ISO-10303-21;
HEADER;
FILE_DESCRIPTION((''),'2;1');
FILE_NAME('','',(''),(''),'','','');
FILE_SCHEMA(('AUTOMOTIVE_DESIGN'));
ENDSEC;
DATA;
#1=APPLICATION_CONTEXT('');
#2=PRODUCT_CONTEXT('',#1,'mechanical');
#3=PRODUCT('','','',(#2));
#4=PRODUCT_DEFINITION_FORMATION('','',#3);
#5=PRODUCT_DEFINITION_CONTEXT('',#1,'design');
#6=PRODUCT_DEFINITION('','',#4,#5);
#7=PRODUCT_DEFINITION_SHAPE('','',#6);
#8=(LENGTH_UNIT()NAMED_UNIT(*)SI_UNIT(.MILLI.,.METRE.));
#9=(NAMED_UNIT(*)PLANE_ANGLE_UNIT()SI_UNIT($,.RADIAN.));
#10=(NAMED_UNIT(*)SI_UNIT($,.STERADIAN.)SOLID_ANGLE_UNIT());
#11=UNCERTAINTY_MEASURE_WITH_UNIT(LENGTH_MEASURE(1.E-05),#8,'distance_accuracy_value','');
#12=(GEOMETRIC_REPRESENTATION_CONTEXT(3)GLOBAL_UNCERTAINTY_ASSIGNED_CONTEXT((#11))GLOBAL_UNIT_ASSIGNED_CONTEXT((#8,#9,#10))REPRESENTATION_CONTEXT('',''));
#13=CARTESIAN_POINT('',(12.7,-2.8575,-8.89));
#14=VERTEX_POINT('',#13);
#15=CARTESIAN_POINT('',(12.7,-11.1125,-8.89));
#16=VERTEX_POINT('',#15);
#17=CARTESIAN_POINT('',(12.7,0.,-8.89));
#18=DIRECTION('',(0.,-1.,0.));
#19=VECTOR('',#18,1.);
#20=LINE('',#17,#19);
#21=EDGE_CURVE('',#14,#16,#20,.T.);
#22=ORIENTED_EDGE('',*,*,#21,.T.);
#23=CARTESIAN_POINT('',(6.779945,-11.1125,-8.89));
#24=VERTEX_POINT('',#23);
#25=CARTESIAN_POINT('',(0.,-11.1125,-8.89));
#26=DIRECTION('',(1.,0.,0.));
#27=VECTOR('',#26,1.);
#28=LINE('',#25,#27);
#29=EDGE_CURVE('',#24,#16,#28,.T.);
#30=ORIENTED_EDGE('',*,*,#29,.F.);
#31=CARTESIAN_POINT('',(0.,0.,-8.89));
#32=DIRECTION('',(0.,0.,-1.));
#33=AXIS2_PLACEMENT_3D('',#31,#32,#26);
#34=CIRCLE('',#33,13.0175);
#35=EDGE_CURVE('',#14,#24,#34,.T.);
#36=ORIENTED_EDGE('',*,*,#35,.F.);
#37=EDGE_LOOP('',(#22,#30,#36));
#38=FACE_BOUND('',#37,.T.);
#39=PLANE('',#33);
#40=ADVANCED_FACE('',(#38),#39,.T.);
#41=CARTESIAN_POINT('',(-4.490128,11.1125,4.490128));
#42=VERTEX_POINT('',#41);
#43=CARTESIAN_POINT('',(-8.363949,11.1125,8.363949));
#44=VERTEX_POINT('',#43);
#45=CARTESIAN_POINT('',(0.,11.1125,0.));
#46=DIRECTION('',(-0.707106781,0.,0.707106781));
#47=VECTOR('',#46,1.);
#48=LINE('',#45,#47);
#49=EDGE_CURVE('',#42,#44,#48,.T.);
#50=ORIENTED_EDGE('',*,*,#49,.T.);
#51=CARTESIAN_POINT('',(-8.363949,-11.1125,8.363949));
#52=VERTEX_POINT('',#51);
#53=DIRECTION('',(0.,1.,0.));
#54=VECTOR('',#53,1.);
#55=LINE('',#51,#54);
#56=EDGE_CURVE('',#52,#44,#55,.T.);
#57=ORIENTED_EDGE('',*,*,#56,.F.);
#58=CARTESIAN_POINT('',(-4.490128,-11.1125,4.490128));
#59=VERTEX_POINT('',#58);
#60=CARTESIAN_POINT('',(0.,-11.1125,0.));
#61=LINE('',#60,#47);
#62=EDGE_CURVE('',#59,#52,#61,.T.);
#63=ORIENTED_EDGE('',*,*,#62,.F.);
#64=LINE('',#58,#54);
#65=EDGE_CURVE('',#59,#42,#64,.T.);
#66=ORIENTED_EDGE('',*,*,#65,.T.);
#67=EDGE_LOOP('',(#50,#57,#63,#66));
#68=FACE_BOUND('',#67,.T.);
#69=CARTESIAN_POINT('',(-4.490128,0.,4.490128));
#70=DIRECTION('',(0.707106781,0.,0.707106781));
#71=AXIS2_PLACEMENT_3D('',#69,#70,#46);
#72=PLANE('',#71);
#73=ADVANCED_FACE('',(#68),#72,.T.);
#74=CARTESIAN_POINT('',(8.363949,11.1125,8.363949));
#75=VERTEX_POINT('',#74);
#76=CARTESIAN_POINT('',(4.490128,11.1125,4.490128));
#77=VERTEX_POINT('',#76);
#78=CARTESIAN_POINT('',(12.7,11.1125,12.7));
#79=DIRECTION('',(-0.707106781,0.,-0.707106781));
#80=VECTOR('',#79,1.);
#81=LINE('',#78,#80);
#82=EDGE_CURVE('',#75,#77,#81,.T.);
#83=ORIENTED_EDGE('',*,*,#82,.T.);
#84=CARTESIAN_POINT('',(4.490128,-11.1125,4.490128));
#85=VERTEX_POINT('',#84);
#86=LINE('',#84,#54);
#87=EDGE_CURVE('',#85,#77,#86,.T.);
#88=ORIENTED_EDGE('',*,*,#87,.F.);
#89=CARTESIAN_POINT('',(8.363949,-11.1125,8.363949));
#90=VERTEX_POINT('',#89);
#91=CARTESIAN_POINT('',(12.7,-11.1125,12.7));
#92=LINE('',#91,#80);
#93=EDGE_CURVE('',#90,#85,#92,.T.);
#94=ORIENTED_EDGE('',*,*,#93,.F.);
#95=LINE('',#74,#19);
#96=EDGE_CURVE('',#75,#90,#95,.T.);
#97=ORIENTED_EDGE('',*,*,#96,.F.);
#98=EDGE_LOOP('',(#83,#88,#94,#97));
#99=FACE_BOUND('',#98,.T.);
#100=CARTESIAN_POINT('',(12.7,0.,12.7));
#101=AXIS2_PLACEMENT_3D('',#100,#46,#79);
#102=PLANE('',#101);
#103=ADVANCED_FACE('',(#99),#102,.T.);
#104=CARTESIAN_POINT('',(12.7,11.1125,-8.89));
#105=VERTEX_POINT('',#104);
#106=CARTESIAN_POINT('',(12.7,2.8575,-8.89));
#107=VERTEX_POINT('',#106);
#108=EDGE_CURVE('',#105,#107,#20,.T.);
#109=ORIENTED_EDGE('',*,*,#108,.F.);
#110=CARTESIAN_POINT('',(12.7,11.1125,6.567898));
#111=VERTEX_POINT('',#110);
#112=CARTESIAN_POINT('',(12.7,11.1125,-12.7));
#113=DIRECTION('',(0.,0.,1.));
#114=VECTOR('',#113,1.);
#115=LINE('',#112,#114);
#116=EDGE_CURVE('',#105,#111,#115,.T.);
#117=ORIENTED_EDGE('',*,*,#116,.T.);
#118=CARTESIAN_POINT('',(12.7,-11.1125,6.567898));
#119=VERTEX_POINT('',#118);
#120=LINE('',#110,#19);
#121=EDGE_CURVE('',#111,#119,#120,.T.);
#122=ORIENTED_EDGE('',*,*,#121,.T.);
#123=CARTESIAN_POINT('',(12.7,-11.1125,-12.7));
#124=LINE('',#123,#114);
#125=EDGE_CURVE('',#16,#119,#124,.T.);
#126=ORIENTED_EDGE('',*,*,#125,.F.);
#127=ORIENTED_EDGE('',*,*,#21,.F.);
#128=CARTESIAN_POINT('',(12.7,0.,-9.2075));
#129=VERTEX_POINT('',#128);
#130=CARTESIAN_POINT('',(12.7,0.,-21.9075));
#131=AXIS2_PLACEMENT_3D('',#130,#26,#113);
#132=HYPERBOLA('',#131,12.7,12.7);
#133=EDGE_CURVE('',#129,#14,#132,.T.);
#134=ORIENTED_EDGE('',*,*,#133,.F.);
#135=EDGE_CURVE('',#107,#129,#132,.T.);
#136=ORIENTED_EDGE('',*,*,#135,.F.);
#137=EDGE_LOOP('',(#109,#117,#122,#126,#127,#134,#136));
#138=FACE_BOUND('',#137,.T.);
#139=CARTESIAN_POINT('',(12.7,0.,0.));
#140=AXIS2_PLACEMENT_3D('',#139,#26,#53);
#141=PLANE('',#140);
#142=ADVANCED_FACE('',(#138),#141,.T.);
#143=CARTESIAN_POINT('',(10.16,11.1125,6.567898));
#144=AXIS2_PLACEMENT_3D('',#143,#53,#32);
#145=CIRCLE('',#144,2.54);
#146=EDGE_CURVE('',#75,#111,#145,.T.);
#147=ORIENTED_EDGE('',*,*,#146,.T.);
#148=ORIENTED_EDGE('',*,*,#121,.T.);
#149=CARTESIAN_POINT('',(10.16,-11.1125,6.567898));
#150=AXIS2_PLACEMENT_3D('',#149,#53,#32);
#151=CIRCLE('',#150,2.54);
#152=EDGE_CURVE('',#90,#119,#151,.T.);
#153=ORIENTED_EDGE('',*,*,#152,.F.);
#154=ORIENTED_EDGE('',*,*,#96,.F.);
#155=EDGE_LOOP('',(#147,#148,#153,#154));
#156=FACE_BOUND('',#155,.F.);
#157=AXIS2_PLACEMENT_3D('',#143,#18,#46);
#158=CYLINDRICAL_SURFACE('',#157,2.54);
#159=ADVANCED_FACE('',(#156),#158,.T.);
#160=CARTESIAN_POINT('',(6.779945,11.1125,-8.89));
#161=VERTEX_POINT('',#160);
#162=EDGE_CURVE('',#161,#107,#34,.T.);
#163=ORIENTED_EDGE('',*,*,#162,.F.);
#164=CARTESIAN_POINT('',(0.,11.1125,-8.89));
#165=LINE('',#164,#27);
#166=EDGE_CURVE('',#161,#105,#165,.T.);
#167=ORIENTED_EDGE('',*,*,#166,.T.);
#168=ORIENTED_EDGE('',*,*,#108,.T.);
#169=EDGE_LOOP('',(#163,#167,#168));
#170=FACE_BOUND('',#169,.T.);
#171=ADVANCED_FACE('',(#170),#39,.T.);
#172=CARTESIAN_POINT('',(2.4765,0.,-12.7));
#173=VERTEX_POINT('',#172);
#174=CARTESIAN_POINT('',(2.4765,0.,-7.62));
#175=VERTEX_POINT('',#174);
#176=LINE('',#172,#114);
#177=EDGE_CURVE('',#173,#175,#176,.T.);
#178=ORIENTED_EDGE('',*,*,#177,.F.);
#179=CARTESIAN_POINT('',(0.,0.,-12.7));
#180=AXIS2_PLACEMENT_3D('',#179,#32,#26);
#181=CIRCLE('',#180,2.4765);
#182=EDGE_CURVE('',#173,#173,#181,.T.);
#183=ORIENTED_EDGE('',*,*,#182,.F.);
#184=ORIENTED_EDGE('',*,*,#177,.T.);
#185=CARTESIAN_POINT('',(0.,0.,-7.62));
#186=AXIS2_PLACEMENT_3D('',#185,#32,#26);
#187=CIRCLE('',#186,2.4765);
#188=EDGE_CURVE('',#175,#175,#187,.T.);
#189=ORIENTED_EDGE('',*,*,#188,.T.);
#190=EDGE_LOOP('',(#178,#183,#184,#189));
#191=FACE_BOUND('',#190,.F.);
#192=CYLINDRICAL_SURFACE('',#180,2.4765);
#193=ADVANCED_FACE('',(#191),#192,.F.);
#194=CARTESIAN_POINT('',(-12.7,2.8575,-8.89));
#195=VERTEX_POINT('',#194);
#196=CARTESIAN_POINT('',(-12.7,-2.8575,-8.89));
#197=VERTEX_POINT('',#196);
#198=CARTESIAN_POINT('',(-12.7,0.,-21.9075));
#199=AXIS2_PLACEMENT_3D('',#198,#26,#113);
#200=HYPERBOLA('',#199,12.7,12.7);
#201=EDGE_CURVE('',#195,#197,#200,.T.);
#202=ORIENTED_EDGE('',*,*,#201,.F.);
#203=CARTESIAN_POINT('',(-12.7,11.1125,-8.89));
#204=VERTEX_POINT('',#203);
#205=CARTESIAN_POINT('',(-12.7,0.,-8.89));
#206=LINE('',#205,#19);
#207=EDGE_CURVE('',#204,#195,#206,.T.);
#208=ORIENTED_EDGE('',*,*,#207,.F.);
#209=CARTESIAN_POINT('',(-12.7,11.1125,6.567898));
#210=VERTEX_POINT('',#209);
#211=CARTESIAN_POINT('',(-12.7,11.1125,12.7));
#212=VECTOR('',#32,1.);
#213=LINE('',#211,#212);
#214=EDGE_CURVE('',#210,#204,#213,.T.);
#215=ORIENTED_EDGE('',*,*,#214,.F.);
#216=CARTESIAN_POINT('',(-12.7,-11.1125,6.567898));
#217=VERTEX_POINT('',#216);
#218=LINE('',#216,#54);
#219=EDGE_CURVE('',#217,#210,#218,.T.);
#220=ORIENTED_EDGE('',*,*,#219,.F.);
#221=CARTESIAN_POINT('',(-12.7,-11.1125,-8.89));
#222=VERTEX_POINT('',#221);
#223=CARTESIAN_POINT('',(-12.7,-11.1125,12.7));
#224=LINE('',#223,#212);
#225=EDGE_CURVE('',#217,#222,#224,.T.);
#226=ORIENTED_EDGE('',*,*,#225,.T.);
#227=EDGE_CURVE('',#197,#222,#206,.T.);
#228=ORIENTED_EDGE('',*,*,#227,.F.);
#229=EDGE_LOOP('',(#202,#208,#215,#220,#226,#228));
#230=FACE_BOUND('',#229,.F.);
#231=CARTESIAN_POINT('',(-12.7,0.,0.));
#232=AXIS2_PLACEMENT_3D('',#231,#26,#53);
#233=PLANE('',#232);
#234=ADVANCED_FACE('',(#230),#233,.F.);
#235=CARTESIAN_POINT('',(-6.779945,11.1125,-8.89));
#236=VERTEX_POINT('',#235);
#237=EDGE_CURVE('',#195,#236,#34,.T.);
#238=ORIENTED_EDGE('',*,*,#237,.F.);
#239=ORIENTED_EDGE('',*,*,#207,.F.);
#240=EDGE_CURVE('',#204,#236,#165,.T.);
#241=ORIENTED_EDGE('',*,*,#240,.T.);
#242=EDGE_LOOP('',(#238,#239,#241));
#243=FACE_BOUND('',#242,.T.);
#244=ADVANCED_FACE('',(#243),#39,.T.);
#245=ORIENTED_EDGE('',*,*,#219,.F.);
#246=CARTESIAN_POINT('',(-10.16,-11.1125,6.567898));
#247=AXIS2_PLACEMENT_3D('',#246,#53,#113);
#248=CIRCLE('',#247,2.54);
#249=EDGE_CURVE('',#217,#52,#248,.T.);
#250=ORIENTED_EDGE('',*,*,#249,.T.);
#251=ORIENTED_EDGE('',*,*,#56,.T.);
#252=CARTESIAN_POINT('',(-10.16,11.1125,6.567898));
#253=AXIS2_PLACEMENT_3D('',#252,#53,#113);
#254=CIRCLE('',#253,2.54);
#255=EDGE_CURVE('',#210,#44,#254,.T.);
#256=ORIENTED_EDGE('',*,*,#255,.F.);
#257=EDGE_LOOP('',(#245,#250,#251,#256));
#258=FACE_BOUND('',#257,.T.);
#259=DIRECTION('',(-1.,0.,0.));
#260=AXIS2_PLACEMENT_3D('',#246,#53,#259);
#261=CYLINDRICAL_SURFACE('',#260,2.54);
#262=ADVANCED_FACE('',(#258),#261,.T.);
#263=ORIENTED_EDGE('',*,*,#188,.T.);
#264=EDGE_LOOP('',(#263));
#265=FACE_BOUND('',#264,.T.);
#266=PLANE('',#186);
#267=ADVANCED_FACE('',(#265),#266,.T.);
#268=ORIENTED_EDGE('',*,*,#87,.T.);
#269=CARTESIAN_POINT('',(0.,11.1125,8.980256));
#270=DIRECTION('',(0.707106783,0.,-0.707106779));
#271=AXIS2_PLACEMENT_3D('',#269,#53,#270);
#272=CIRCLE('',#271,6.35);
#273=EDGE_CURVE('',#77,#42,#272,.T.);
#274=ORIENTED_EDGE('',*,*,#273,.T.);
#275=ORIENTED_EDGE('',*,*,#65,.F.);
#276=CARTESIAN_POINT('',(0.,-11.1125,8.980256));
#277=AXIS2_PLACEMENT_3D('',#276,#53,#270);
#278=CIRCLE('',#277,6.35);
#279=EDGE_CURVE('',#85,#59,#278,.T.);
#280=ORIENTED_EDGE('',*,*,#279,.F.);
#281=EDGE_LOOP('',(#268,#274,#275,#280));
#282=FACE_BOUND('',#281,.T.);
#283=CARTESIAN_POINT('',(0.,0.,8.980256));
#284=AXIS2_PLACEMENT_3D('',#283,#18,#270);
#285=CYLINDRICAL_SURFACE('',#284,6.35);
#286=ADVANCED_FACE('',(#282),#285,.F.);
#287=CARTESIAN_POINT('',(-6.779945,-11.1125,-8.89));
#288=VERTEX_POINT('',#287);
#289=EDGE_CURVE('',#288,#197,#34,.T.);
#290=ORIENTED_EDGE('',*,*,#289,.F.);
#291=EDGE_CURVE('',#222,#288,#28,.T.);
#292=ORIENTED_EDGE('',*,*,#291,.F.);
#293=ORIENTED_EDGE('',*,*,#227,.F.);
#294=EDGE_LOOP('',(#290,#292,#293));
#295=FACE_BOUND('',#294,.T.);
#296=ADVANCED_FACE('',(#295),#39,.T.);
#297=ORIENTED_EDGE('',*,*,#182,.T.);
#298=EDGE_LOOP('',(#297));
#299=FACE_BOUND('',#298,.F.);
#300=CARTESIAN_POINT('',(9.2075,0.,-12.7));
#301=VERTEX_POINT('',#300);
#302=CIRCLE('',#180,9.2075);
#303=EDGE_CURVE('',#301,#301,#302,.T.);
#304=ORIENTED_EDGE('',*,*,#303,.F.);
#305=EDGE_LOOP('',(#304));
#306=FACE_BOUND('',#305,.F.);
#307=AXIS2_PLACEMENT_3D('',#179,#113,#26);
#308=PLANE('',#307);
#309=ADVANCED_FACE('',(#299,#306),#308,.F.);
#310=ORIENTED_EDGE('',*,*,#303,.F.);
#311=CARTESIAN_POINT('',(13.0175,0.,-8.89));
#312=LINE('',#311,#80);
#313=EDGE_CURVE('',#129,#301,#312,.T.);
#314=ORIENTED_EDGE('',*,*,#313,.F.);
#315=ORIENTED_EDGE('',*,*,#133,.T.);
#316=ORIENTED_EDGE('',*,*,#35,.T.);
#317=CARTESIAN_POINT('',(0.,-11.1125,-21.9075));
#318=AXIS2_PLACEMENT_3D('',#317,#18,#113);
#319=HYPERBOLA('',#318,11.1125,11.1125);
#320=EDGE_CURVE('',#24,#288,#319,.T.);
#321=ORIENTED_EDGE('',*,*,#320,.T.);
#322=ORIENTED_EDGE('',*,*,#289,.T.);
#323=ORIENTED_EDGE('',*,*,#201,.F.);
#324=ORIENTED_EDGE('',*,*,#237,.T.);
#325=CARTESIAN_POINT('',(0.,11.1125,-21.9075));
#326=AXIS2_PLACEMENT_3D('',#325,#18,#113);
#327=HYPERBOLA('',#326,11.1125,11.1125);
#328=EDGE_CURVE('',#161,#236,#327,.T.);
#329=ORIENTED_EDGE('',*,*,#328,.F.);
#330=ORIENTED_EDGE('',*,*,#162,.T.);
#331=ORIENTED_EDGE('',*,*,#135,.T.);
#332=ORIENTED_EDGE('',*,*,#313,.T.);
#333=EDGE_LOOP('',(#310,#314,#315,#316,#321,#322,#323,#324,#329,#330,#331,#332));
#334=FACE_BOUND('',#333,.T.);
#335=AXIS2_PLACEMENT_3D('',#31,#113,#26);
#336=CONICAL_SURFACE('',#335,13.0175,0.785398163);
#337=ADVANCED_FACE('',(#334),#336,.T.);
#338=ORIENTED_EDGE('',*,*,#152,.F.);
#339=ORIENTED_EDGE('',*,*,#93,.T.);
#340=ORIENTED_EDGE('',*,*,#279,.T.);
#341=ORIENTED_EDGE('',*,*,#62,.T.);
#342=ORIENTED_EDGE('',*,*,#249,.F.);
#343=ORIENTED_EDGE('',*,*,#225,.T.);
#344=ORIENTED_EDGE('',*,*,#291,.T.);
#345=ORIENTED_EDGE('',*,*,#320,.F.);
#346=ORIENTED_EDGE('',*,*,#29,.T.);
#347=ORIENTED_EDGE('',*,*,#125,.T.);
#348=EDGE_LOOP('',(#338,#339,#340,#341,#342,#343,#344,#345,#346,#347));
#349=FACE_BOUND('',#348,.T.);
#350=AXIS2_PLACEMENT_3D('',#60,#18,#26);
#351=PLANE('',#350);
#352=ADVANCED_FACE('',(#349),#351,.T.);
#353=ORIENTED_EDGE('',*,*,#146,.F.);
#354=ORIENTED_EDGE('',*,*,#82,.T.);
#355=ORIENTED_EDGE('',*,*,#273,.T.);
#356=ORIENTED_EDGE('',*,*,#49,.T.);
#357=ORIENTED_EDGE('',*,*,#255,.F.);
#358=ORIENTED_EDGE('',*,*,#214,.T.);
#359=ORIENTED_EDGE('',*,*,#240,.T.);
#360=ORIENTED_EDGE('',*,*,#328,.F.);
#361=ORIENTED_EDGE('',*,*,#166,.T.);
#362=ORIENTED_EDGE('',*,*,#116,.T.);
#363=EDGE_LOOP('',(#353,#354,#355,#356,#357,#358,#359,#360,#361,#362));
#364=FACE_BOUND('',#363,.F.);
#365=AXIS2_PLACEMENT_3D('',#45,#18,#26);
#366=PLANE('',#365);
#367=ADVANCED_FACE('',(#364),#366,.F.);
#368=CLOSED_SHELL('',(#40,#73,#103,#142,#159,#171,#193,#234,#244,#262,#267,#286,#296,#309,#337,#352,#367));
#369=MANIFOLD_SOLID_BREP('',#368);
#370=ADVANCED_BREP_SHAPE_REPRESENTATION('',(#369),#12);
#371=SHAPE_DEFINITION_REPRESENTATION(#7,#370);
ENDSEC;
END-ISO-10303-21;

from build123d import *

# Parameters (mm, degrees)
F1_DEPTH = 11.1125
F2_R     = 2.54
F3_R     = 2.4765
F4_DEPTH = 5.08
F5_W     = 25.4
F5_H     = 22.225
F5_R     = 7.9375
F6_DEPTH = 3.81


# Not quite as in the source:
# - a fillet or chamfer that OpenCascade refuses, or shapes differently, is made with other operations: its cross-section is extruded or revolved along the edge and cut away or added


with BuildPart() as f1:
    # F0 (on Front) → F1 (new body, symmetric)
    with BuildSketch(Plane.XZ):
        Polygon((-4.490128064, 4.490128064), (-12.7, 12.7), (-12.7, -12.7), (12.7, -12.7), (12.7, 12.7), (4.4901280734, 4.4901280734), (0, 0), align=None)
        with BuildLine():
            ThreePointArc((4.4901280734, 4.4901280734), (6.6e-09, 2.6302561211), (-4.490128064, 4.490128064))
            Line((-4.490128064, 4.490128064), (0, 0))
            Line((0, 0), (4.4901280734, 4.4901280734))
        make_face()
    extrude(amount=F1_DEPTH, both=True)

    # F2
    f2_edges = [f1.edges().sort_by_distance(p)[0] for p in [
        (12.7, 0, 12.7),
        (-12.7, 0, 12.7),
    ]]
    fillet(f2_edges, radius=F2_R)

    # F3 (on face) → F4 (cut)
    with BuildSketch(Plane(origin=(0, 0, -12.7), x_dir=(1, 0, 0), z_dir=(0, 0, -1))):
        Circle(F3_R)
    extrude(amount=-F4_DEPTH, mode=Mode.SUBTRACT)

    # F5 (on face) → F6 (cut)
    with BuildSketch(Plane(origin=(0, 0, -12.7), x_dir=(1, 0, 0), z_dir=(0, 0, -1))):
        Rectangle(F5_W, F5_H)
        Circle(F5_R, mode=Mode.SUBTRACT)
    extrude(amount=-F6_DEPTH, mode=Mode.SUBTRACT)

    # F7: chamfer of 5.08 on 1 edges, made by hand


with BuildPart() as f7_tool2:
    # F7_s3 → F7_t4 (revolve)
    with BuildSketch(Plane.XZ):
        Polygon((13.0175, -8.89), (7.9375, -13.97), (7.9375, -8.89), align=None)
    revolve(axis=Axis((0, 0, -8.89), (0, 0, -1)))

    split(bisect_by=Plane.XZ.offset(-11.1125), keep=Keep.TOP)

    split(bisect_by=Plane.XZ.offset(11.1125), keep=Keep.BOTTOM)

    split(bisect_by=Plane.YZ.offset(12.7), keep=Keep.BOTTOM)

    split(bisect_by=Plane.YZ.offset(-12.7), keep=Keep.TOP)

    split(bisect_by=Plane.XY.offset(-12.7), keep=Keep.TOP)


with BuildPart() as f1_1:
    add(f1.part)

    # F7_t1: union F7_tool2
    add(f7_tool2.part)


solid = f1_1.part
